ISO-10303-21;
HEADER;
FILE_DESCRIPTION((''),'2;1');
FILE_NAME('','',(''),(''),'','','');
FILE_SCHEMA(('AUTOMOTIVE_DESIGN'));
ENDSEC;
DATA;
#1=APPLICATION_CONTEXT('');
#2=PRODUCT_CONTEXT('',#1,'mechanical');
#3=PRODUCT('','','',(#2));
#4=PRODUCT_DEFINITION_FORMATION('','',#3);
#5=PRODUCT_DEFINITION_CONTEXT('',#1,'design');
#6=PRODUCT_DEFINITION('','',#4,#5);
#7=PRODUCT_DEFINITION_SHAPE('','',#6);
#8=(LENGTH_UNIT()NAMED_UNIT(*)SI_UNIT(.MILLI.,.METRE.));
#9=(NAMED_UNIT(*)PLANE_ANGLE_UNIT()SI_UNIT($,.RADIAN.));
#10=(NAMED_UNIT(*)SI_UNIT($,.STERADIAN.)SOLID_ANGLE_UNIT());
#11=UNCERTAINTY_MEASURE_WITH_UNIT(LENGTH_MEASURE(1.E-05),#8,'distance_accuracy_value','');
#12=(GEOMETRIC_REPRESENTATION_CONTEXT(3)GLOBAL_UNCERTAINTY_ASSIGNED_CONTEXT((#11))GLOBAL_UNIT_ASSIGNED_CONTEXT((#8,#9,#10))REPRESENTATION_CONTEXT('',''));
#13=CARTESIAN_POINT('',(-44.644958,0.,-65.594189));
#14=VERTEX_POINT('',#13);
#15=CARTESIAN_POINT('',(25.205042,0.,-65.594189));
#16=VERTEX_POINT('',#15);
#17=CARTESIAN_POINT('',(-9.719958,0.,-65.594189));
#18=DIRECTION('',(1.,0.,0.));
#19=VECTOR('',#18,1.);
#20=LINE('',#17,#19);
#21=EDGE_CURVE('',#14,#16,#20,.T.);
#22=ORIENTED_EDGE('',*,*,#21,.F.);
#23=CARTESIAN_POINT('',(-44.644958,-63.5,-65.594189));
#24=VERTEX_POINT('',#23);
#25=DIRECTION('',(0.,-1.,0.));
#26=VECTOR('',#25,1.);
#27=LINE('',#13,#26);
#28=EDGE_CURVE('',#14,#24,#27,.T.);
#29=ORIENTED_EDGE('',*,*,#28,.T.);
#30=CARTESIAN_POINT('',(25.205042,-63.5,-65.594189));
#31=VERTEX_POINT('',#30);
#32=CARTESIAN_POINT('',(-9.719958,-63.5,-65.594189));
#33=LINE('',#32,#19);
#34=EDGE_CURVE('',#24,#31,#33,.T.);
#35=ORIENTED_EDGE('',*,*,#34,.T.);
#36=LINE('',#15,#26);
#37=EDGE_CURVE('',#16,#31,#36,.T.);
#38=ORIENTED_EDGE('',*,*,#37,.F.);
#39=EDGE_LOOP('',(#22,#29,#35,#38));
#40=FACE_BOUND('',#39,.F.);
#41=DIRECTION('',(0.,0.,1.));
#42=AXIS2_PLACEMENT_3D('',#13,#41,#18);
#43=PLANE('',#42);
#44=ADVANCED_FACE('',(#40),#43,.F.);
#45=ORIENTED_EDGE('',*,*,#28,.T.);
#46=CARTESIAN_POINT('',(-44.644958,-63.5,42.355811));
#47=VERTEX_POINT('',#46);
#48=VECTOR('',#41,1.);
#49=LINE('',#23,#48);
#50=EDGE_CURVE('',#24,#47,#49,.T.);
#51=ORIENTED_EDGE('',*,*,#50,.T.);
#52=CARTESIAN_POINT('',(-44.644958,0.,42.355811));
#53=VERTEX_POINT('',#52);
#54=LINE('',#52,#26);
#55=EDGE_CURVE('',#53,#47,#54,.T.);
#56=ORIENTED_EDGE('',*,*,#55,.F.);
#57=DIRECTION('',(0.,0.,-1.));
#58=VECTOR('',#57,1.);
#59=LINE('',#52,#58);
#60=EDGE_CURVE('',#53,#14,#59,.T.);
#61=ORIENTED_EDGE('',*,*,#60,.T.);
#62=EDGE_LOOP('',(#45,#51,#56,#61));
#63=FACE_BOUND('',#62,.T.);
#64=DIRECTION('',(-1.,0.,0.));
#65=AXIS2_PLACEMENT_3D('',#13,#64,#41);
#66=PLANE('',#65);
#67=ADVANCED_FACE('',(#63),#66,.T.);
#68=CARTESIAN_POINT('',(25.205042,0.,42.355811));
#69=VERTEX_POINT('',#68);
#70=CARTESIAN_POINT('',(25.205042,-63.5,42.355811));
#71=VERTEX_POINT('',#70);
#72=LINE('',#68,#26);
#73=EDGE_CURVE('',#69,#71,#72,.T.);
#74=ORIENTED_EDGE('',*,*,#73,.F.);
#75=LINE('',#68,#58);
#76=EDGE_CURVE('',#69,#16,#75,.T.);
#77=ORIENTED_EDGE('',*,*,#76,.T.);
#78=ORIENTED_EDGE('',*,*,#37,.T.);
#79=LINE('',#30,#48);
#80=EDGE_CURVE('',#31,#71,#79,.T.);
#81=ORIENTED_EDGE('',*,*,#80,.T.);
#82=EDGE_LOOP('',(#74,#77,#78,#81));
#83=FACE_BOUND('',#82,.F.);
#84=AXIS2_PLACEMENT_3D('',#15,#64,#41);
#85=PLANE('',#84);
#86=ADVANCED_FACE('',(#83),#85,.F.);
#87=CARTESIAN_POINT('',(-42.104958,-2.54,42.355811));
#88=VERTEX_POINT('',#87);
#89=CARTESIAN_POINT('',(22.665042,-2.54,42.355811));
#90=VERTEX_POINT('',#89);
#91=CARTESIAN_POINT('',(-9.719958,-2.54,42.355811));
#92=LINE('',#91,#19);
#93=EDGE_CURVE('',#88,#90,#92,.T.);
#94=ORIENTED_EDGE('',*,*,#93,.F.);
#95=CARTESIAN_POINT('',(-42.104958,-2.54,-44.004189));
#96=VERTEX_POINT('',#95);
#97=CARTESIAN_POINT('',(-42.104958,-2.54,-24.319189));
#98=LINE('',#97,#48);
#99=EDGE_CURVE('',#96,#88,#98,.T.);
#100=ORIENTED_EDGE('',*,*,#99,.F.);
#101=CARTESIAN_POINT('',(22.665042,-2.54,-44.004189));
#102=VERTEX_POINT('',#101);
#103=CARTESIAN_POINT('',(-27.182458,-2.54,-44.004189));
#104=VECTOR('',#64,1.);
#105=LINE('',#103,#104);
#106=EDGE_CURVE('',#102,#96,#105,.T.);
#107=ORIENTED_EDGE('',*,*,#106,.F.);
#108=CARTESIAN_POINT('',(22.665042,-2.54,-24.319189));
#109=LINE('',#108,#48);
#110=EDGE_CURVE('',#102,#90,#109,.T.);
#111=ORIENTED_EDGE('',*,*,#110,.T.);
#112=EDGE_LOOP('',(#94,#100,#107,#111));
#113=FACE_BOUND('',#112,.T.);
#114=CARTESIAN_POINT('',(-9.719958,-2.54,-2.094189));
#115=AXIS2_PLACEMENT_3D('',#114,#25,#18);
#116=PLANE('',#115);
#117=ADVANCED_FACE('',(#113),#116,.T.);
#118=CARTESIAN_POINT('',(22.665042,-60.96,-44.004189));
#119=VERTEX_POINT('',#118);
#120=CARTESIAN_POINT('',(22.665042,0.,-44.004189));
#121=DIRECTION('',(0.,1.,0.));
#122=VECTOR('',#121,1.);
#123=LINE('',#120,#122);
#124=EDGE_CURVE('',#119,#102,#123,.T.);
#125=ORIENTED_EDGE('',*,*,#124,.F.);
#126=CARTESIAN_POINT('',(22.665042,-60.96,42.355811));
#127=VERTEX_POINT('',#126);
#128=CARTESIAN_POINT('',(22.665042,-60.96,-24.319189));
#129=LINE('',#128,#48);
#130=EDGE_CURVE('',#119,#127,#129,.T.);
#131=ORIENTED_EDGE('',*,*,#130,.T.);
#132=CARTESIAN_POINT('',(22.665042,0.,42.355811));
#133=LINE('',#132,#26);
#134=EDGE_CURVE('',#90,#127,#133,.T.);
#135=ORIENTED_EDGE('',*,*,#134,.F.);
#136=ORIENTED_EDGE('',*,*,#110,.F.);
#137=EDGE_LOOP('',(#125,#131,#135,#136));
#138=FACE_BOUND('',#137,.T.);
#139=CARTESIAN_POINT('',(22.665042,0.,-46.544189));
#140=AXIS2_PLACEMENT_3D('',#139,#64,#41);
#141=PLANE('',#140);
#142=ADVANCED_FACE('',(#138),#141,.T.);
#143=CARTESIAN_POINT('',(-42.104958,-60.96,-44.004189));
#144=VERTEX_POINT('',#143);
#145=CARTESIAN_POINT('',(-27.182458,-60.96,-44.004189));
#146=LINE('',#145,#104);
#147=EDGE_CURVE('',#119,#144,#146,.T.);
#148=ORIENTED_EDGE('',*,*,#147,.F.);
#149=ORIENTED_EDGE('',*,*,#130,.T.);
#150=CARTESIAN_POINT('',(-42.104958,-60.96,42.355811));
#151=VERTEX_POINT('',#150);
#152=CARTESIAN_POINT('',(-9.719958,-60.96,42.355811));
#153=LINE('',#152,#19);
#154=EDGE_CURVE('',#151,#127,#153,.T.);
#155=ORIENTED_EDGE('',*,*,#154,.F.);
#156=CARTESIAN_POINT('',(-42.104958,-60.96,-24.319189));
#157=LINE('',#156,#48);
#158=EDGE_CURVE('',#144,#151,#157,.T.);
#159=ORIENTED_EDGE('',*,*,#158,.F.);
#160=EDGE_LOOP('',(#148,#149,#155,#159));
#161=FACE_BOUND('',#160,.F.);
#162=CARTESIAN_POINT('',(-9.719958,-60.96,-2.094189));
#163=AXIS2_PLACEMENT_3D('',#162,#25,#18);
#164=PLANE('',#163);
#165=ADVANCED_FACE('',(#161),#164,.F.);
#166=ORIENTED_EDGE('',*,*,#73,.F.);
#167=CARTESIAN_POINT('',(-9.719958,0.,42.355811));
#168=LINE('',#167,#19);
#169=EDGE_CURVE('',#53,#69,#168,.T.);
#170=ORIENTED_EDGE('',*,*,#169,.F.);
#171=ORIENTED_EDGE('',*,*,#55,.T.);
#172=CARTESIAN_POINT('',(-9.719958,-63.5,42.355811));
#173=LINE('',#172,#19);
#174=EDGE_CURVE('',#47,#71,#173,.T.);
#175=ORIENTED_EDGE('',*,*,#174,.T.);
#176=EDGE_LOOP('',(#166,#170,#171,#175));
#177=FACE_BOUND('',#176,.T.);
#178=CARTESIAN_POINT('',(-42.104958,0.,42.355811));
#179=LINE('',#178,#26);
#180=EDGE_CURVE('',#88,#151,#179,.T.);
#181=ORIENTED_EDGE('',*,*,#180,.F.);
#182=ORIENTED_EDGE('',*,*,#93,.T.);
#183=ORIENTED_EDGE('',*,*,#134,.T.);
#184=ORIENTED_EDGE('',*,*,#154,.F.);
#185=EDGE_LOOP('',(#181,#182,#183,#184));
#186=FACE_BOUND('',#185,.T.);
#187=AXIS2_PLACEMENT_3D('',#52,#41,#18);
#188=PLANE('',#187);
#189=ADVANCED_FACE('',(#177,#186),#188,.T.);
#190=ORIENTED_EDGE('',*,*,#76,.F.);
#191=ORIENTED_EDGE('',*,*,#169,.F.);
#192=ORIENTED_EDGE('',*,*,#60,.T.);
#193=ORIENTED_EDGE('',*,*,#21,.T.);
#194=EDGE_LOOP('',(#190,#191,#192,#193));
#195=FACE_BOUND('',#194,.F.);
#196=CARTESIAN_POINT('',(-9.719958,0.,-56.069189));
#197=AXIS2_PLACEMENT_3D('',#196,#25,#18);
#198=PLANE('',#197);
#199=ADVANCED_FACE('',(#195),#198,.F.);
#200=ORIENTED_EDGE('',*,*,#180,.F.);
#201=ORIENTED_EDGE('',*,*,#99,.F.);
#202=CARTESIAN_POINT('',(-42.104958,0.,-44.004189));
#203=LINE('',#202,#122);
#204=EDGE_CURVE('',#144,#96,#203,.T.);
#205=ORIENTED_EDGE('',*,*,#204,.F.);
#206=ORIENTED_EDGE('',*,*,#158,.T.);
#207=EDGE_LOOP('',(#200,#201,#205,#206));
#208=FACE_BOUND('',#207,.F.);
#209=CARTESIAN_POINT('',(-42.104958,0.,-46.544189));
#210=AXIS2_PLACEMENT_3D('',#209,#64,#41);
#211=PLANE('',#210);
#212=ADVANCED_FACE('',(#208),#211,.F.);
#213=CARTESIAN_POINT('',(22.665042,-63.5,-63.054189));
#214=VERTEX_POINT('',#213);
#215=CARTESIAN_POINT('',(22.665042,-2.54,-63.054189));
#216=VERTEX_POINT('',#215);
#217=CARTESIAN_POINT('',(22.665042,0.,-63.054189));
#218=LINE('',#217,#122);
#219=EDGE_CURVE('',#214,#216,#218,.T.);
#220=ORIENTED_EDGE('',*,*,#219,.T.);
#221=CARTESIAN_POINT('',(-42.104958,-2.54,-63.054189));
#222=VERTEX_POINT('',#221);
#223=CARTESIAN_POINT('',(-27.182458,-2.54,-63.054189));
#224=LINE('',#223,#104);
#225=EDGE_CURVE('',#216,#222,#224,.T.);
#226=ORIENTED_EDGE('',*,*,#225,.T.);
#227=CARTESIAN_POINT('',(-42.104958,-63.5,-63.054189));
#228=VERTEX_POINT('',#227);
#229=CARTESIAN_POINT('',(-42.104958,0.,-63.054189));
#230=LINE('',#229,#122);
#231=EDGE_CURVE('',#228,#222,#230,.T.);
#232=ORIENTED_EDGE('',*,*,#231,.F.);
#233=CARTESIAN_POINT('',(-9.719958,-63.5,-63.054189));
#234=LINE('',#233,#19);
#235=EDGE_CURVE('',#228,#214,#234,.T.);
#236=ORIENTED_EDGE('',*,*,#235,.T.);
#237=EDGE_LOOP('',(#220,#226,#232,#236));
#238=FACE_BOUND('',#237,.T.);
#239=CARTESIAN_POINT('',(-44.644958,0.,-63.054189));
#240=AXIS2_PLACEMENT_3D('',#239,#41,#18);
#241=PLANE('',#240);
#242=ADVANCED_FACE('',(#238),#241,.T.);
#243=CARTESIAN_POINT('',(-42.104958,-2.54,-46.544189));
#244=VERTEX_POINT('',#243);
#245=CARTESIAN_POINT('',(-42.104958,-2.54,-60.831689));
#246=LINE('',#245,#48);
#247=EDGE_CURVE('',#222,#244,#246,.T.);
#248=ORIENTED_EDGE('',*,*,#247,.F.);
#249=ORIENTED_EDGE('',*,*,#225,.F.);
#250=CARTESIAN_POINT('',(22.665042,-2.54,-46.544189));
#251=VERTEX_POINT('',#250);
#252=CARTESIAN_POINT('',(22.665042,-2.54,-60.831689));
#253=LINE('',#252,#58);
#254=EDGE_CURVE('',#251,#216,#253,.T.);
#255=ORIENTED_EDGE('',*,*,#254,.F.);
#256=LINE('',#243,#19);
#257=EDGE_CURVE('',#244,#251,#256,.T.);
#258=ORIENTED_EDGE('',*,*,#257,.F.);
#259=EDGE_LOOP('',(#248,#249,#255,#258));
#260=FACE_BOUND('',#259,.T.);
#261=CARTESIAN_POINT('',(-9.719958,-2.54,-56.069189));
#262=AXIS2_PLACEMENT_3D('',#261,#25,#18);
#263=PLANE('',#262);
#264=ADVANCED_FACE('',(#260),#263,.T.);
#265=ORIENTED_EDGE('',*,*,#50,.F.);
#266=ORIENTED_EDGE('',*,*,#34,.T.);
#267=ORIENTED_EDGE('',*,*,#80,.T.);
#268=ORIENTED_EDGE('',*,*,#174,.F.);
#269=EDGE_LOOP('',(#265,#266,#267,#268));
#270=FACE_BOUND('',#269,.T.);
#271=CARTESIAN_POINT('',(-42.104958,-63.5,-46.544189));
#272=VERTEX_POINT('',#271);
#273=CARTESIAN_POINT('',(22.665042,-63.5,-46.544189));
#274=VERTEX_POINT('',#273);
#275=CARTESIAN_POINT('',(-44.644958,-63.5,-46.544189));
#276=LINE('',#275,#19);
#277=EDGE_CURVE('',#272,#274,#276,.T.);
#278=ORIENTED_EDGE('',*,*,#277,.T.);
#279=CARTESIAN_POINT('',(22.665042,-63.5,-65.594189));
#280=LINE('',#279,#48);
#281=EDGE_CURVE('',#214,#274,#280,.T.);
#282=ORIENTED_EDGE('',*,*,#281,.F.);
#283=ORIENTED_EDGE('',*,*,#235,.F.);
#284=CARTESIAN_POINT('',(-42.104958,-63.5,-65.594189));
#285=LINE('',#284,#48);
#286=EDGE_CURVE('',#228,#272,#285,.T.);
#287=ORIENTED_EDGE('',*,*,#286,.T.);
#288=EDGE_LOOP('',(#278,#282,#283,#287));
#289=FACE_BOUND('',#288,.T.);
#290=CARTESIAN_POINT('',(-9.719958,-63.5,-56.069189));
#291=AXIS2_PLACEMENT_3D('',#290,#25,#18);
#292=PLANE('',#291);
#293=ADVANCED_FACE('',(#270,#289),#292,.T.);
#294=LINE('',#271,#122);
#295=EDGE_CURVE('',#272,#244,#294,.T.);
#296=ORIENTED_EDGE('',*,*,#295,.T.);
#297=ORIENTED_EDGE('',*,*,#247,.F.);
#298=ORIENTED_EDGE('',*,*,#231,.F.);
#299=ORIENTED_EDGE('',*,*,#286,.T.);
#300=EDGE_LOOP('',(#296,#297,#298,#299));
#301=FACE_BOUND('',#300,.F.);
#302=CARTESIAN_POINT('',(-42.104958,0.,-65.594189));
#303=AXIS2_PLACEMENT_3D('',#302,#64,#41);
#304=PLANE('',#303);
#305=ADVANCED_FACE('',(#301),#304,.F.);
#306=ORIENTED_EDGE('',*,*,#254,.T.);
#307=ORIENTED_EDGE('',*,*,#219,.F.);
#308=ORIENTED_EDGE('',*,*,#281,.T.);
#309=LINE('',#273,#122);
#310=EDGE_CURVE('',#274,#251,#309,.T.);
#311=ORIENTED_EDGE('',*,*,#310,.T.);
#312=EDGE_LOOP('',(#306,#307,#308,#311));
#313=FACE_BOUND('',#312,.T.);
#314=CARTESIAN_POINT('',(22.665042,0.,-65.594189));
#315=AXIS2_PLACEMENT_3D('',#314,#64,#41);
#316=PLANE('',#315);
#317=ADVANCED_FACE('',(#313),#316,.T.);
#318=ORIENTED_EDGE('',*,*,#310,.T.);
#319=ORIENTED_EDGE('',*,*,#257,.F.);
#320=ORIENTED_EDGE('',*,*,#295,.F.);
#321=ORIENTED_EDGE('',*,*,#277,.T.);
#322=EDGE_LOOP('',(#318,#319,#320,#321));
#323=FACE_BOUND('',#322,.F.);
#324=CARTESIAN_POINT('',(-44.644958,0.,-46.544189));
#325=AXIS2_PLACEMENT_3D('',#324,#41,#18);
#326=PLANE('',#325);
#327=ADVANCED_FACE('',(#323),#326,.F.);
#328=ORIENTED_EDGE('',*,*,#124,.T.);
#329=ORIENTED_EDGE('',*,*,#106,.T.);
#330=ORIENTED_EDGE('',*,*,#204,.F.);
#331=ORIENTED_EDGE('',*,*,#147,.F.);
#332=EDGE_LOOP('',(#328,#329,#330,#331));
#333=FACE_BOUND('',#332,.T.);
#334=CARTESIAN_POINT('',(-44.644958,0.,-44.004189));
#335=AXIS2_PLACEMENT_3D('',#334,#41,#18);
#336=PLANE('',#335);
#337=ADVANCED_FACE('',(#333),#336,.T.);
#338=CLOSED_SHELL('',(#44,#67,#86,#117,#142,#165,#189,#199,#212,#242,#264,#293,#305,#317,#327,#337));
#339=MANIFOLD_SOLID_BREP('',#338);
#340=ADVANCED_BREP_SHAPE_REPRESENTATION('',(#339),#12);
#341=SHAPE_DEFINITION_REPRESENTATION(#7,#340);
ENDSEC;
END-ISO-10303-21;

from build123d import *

# Parameters (mm, degrees)
F0_W        = 69.85
F0_H        = 88.9
F1_DEPTH    = 63.5
F2_T        = -2.54
F0_H_2      = 19.05
F3_DEPTH    = 63.5
F4_T        = 2.54
F4_T3_DEPTH = 91.44
F4_T5_DEPTH = 69.85
F4_T7_DEPTH = 63.5


# Not quite as in the source:
# - a shell that OpenCascade refuses in one call is made with other operations: the cavity is built on its own and cut out


with BuildPart() as f1:
    # F0 (on Front) → F1 (new body)
    with BuildSketch(Plane.XZ):
        with Locations((-9.7199578146, -2.0941891145)):
            Rectangle(F0_W, F0_H)
    extrude(amount=F1_DEPTH)

    # F2
    f2_openings = [f1.faces().sort_by_distance(p)[0] for p in [
        (-9.719958, -31.75, 42.355811),
    ]]
    offset(amount=F2_T, openings=f2_openings)

    # F0 (on Front) → F3 (join)
    with BuildSketch(Plane.XZ):
        with Locations((-9.7199578146, -56.0691891145)):
            Rectangle(F0_W, F0_H_2)
    extrude(amount=F3_DEPTH)

    # F4: shell of thickness 2.54, made by hand


with BuildPart() as f4_core1:
    # F4_t2: copy of F1
    add(f1.part)

    # the walls: a layer under each face that stays
    f4_faces = [f4_core1.faces().sort_by_distance(p)[0] for p in [
        (-44.6449578146, -31.75, -11.6191891145),
        (-9.7199578146, 0, -11.6191891145),
        (25.2050421854, -31.75, -11.6191891145),
        (-9.7199578146, -31.75, -65.5941891145),
        (22.8767088521, -61.3833333333, 42.3558108855),
        (-9.7199578146, -60.96, -0.8241891145),
        (-9.7199578146, -31.75, -44.0041891145),
        (-42.1049578146, -31.75, -0.8241891145),
        (-9.7199578146, -2.54, -0.8241891145),
        (22.6650421854, -31.75, -0.8241891145),
    ]]
    thicken(f4_faces, amount=-F4_T, mode=Mode.SUBTRACT)

    # F4_s4 → F4_t3 (cut)
    with BuildSketch(Plane.XY.offset(-46.5441891145)):
        Polygon((-42.0795578146, -60.9346), (-42.1049578146, -63.5), (-44.6449578146, -63.5), (-44.6449578146, -60.96), align=None)
        Polygon((22.6396421854, -60.9346), (22.6650421854, -63.5), (25.2050421854, -63.5), (25.2050421854, -60.96), align=None)
        Polygon((-42.0795578146, -2.5654), (-44.6449578146, -2.54), (-44.6449578146, 0), (-42.1049578146, 0), align=None)
        Polygon((22.6396421854, -2.5654), (22.6650421854, 0), (25.2050421854, 0), (25.2050421854, -2.54), align=None)
    extrude(amount=F4_T3_DEPTH, mode=Mode.SUBTRACT)

    # F4_s6 → F4_t5 (cut)
    with BuildSketch(Plane.YZ.offset(-44.6449578146)):
        Polygon((-60.9346, -43.9787891145), (-63.5, -44.0041891145), (-63.5, -46.5441891145), (-60.96, -46.5441891145), align=None)
        Polygon((-2.5654, -43.9787891145), (-2.54, -46.5441891145), (0, -46.5441891145), (0, -44.0041891145), align=None)
    extrude(amount=F4_T5_DEPTH, mode=Mode.SUBTRACT)

    # F4_s8 → F4_t7 (cut)
    with BuildSketch(Plane.XZ):
        Polygon((22.6396421854, -43.9787891145), (22.6650421854, -46.5441891145), (25.2050421854, -46.5441891145), (25.2050421854, -44.0041891145), align=None)
        Polygon((-42.0795578146, -43.9787891145), (-42.1049578146, -46.5441891145), (-44.6449578146, -46.5441891145), (-44.6449578146, -44.0041891145), align=None)
    extrude(amount=F4_T7_DEPTH, mode=Mode.SUBTRACT)


with BuildPart() as f1_1:
    add(f1.part)

    # what is left inside the walls is the cavity
    f4_cavity = [f4_core1.part.solids().sort_by_distance(p)[0] for p in [
        (-9.719958, -43.18, -63.028789),
    ]]
    add(f4_cavity, mode=Mode.SUBTRACT)


solid = f1_1.part
